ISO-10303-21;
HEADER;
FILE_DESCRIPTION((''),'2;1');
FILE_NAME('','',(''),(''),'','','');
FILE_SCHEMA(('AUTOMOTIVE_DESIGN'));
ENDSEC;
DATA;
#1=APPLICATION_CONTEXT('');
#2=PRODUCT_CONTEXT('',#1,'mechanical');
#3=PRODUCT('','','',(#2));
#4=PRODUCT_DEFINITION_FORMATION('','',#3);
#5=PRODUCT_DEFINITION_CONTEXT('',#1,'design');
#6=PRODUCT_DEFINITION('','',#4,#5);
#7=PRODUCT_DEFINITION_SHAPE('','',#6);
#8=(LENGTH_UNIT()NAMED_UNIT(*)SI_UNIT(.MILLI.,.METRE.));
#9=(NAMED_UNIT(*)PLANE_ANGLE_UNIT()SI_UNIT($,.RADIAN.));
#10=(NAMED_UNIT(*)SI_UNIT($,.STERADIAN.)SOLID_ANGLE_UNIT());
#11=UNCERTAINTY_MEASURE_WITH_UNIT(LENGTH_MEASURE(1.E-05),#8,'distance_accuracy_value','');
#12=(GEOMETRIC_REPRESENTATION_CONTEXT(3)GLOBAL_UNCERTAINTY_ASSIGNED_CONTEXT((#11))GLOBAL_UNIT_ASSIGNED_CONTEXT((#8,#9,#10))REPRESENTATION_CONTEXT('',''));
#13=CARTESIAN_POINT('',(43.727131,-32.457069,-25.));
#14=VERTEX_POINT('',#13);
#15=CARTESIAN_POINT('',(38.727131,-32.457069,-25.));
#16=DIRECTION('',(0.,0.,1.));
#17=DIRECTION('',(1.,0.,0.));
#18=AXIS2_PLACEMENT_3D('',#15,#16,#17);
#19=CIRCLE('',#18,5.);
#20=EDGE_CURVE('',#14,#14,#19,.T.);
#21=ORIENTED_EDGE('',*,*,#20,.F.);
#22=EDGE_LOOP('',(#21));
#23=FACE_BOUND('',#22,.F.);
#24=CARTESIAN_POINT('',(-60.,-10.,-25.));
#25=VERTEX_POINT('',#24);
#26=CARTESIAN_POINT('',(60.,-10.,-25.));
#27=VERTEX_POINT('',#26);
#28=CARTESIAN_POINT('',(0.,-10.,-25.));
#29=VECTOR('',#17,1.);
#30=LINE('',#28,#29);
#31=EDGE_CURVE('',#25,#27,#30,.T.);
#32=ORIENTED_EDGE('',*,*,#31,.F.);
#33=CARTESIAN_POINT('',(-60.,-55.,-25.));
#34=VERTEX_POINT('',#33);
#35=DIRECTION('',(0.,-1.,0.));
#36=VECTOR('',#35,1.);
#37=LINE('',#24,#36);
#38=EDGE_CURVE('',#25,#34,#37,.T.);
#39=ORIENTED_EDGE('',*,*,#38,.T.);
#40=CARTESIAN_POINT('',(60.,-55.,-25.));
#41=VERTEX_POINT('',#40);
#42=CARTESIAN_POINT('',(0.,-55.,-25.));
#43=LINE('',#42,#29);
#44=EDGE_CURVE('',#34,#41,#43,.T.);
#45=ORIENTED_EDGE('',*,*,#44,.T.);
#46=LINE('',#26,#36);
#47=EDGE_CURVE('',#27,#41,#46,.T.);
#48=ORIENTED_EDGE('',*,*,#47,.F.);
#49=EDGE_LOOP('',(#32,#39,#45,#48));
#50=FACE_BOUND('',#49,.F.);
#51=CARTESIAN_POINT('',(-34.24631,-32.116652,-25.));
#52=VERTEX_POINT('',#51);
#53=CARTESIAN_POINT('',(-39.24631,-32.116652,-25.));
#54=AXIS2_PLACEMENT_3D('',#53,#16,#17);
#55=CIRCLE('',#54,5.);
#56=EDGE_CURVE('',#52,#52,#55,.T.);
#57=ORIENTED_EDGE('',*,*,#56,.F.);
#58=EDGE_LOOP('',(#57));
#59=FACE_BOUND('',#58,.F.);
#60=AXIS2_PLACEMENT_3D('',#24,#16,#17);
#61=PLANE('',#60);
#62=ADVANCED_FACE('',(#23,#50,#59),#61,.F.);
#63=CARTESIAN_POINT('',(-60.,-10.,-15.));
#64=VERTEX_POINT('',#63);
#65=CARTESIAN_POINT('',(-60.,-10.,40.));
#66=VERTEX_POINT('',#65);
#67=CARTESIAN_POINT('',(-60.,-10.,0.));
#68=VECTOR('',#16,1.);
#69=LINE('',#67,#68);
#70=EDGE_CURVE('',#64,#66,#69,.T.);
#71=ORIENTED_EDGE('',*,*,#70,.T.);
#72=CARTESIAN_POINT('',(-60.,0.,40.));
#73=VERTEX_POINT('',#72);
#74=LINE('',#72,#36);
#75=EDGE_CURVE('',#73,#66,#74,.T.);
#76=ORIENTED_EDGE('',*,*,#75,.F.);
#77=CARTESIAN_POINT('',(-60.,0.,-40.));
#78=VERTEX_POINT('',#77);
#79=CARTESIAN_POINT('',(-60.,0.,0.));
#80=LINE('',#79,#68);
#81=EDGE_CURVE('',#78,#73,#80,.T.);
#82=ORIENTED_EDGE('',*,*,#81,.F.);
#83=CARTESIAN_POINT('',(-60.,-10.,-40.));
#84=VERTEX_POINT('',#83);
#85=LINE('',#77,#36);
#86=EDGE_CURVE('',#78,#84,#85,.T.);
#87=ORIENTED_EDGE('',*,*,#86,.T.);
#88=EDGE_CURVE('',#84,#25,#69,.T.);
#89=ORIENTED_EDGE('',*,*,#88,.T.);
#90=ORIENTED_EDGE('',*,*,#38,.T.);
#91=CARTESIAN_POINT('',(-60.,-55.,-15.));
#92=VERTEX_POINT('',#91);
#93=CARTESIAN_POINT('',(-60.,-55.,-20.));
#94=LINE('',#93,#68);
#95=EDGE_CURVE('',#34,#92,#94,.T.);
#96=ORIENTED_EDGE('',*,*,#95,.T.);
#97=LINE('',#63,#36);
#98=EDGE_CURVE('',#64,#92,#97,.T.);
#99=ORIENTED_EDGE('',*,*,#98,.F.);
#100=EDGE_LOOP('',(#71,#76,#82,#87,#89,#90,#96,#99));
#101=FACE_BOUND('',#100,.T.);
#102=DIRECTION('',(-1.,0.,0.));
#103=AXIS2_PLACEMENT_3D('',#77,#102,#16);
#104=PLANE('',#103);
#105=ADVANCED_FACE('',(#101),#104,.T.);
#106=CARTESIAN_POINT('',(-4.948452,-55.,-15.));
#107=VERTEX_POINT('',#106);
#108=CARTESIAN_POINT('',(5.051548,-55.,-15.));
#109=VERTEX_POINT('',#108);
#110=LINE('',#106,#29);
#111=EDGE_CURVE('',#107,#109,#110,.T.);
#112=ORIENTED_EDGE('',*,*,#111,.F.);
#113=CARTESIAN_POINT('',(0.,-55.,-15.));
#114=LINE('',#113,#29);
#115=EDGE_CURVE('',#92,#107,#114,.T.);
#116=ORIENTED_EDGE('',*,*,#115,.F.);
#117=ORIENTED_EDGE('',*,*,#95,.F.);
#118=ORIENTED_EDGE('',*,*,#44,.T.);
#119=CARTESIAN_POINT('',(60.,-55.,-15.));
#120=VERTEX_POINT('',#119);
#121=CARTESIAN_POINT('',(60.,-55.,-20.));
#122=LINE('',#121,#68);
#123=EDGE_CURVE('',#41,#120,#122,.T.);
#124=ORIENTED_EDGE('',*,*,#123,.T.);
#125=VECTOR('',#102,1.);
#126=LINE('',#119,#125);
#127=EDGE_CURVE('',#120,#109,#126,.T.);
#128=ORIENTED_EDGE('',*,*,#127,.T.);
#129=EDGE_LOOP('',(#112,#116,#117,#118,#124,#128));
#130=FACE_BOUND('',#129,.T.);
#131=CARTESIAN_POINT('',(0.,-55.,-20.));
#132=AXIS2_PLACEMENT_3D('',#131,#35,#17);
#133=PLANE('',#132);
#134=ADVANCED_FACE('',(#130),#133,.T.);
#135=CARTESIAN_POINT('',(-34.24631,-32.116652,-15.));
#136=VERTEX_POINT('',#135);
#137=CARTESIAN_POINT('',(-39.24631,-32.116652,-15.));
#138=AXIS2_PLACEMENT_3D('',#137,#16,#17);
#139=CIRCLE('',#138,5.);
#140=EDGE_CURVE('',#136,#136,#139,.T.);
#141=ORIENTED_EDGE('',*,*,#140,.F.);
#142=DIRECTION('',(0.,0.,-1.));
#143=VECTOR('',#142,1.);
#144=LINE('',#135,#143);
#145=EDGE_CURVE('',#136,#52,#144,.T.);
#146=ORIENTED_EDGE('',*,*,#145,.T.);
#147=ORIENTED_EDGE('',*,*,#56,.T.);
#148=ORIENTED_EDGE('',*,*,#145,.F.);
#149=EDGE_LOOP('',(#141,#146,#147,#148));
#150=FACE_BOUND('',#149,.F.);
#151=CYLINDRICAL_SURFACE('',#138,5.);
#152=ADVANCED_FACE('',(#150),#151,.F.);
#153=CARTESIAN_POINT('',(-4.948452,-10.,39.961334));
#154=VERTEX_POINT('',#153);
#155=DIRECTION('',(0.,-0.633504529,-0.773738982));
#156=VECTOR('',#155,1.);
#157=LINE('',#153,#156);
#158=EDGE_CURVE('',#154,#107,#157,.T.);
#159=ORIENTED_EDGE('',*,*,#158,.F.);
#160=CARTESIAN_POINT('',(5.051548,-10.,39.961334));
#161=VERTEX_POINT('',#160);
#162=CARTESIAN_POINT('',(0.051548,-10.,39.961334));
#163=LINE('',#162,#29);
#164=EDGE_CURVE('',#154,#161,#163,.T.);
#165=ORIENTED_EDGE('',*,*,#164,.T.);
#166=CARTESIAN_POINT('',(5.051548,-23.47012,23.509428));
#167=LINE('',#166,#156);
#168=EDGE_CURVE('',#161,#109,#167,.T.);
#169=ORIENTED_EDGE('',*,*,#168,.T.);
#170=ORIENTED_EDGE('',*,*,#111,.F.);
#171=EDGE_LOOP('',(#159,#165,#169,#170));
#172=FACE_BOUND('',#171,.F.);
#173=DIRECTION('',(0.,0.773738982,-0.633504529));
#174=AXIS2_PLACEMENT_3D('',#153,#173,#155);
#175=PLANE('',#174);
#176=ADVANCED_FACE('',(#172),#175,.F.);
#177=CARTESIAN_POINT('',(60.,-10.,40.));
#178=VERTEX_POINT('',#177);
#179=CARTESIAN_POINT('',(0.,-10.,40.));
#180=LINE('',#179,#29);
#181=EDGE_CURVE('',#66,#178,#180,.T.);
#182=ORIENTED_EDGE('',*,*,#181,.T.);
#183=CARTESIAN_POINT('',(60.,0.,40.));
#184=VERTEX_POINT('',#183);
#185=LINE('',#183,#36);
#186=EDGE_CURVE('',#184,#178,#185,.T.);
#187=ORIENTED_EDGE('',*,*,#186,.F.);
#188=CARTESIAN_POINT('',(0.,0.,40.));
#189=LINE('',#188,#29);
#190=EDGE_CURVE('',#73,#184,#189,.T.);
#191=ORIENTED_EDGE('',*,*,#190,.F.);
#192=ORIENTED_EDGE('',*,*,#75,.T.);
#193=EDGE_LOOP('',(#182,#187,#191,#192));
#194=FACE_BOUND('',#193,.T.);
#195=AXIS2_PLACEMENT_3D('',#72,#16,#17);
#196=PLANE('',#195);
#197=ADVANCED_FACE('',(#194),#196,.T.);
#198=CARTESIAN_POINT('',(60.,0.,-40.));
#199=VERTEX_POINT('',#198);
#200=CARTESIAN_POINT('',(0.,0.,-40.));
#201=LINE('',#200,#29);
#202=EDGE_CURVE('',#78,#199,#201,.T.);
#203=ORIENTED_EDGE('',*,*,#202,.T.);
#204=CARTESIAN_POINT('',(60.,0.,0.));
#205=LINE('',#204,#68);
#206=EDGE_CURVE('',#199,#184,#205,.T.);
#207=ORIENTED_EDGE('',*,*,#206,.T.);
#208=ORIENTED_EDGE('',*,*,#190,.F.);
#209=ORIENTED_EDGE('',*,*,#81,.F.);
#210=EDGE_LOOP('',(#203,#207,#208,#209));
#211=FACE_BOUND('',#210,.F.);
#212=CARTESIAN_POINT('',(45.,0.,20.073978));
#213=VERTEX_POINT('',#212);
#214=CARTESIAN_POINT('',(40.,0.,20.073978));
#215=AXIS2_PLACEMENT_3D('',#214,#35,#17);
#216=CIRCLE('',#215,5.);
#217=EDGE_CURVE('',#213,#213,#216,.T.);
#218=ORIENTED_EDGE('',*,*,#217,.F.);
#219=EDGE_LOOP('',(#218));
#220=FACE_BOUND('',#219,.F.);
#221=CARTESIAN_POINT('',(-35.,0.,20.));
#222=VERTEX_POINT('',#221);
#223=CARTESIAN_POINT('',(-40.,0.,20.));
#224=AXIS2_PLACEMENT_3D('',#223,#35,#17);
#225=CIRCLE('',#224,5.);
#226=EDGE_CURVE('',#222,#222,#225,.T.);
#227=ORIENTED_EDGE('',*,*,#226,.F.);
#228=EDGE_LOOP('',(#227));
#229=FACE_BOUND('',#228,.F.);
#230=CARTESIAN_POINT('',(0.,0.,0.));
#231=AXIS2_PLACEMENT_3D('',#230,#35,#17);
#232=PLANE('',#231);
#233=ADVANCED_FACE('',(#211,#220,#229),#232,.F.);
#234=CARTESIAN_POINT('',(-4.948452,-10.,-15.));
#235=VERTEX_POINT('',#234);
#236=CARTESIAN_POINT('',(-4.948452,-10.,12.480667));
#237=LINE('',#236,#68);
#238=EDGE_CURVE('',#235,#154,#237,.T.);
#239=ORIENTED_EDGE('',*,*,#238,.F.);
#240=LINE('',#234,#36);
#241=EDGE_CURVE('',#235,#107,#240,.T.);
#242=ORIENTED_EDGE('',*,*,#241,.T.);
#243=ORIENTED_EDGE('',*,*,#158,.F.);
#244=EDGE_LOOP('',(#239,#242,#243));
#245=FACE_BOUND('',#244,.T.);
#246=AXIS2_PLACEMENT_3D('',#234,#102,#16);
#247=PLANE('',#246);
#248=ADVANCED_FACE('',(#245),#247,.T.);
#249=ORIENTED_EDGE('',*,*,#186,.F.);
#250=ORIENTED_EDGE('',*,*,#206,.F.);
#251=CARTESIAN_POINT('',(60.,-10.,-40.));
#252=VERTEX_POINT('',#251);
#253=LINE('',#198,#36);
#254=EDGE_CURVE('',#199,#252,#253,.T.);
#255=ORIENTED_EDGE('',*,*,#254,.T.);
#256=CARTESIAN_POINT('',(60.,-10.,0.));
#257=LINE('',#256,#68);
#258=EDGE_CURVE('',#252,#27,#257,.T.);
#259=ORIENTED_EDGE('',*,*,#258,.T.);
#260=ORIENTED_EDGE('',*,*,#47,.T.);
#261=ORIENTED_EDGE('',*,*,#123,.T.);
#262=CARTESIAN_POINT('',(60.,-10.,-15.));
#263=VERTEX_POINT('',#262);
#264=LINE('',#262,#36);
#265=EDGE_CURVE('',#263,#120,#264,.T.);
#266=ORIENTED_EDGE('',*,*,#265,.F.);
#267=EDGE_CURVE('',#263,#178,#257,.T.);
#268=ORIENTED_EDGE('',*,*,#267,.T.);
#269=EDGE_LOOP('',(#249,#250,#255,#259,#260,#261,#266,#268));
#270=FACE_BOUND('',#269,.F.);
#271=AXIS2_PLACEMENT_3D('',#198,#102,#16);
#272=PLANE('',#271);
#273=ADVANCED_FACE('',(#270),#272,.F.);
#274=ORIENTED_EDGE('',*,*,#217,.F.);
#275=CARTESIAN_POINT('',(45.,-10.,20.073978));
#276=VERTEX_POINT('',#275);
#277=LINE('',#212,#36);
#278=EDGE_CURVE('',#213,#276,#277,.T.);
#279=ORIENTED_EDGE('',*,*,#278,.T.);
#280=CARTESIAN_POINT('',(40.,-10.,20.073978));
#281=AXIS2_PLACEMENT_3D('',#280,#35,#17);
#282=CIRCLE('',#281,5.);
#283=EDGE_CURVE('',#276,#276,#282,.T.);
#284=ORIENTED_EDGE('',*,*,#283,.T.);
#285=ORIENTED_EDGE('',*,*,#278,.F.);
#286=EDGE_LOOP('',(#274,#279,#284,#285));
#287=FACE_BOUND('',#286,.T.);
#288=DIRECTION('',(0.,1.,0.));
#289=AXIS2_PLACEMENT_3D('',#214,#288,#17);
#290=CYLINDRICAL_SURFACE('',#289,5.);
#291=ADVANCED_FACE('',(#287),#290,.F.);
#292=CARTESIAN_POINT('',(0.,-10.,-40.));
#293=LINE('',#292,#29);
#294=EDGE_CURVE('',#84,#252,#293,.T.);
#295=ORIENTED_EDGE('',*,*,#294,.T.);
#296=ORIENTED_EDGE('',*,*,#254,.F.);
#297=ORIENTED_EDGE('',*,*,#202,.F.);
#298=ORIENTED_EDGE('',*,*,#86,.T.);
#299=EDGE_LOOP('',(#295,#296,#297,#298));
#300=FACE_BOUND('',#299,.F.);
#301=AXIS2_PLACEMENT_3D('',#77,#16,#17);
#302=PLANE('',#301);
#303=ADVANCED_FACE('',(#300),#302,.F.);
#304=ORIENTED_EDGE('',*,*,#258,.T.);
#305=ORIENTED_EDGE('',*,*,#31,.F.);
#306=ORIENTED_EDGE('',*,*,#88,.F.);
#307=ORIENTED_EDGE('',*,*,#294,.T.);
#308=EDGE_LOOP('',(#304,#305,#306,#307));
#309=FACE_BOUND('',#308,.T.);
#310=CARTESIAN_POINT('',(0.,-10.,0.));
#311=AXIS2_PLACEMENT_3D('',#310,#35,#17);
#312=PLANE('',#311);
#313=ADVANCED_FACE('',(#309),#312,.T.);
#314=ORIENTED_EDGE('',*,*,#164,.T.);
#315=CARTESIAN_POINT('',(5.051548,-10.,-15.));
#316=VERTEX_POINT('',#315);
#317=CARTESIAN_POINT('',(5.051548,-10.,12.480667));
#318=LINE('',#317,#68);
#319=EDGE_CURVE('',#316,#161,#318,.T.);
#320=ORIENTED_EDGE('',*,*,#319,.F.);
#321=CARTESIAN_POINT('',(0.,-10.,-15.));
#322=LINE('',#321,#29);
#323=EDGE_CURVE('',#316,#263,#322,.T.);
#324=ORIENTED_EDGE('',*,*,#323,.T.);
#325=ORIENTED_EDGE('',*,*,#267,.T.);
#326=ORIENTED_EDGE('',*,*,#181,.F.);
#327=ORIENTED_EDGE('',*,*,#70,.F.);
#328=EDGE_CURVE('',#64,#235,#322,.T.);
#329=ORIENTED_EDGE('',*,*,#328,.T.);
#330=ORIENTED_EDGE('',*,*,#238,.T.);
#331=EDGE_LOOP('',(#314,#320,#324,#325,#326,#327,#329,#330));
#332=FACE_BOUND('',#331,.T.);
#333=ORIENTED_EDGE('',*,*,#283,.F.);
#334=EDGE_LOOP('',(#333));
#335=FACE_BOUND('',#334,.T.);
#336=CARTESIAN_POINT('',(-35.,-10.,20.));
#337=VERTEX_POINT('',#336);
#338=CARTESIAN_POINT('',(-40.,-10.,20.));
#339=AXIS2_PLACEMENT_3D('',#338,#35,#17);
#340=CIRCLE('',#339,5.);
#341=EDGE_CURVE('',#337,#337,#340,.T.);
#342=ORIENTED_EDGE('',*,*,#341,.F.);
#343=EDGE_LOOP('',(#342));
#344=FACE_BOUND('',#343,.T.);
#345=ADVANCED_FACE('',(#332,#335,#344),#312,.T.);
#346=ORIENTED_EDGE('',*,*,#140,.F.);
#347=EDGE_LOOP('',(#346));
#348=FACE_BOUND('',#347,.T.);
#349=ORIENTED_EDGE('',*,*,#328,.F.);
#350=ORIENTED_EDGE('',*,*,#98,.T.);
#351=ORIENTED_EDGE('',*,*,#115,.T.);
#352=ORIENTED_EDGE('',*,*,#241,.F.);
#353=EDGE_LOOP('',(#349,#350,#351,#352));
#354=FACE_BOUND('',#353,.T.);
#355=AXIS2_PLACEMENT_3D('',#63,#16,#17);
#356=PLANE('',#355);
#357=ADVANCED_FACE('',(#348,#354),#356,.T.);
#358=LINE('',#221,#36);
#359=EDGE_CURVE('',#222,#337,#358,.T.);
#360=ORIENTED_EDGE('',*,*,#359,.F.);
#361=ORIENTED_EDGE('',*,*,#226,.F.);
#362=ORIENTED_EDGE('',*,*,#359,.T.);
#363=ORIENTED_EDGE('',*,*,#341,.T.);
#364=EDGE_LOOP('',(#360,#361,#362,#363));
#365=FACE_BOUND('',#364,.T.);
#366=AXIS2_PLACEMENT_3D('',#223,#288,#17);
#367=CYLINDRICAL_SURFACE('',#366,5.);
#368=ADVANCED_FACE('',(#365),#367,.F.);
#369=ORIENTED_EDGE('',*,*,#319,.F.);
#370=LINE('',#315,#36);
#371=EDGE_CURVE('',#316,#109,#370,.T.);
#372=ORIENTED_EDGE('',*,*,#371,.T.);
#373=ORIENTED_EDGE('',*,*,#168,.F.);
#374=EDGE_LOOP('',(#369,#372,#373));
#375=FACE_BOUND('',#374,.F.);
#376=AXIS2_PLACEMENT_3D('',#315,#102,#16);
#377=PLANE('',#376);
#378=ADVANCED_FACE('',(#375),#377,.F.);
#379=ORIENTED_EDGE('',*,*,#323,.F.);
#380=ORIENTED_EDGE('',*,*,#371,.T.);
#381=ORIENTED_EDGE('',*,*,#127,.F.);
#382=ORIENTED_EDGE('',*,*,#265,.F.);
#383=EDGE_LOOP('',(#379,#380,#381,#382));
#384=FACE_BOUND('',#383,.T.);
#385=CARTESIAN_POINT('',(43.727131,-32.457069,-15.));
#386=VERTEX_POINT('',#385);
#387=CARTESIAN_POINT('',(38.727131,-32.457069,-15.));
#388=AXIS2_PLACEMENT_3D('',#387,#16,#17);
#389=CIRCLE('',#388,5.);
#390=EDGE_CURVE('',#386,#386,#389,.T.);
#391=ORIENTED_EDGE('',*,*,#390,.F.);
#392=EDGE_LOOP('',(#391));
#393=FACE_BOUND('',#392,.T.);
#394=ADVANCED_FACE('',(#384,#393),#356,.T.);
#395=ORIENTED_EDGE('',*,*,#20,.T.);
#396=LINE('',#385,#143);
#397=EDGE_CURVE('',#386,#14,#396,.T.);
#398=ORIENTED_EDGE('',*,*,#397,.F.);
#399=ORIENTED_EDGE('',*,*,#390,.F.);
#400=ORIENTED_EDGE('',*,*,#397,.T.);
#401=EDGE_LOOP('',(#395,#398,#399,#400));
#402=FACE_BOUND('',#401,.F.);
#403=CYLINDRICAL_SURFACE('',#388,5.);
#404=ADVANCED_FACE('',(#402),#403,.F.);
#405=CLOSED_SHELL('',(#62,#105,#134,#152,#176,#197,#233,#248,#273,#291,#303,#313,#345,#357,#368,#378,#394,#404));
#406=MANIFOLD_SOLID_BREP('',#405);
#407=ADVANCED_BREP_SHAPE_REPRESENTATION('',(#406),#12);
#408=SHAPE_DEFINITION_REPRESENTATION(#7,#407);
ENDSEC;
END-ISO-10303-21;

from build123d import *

# Parameters (mm, degrees)
F0_W     = 120
F0_H     = 80
F0_R     = 5
F1_DEPTH = 10
F2_W     = 120
F2_H     = 10
F3_DEPTH = 45
F4_R     = 5
F5_DEPTH = 25
F6_W     = 10
F6_H     = 54.9613343179
F7_DEPTH = 45
F9_DEPTH = 25


# Not quite as in the source:
# - a feature names something its author has since deleted; it is built from what else it names


with BuildPart() as f1:
    # F0 (on Front) → F1 (new body)
    with BuildSketch(Plane.XZ):
        Rectangle(F0_W, F0_H)
        with Locations((-40, 20)):
            Circle(F0_R, mode=Mode.SUBTRACT)
        with Locations((40, 20.0739782304)):
            Circle(F0_R, mode=Mode.SUBTRACT)
    extrude(amount=F1_DEPTH)

    # F2 (on face) → F3 (join)
    with BuildSketch(Plane.XZ.offset(10)):
        with Locations((0, -20)):
            Rectangle(F2_W, F2_H)
    extrude(amount=F3_DEPTH)

    # F4 (on face) → F5 (cut)
    with BuildSketch(Plane.XY.offset(-15)):
        with Locations((-39.2463095486, -32.116651535)):
            Circle(F4_R)
        with Locations((38.7271312058, -32.4570691816)):
            Circle(F4_R)
    extrude(amount=-F5_DEPTH, mode=Mode.SUBTRACT)

    # F6 (on face) → F7 (join)
    with BuildSketch(Plane.XZ.offset(10)):
        with Locations((0.0515476614, 12.480667159)):
            Rectangle(F6_W, F6_H)
    extrude(amount=F7_DEPTH)

    # F8 (on face) → F9 (cut)
    with BuildSketch(Plane(origin=(-4.9484523386, 0, 0), x_dir=(0, -1, 0), z_dir=(-1, 0, 0))):
        Polygon((55, 39.9613343179), (10, 39.9613343179), (55, -15), align=None)
    extrude(amount=-F9_DEPTH, mode=Mode.SUBTRACT)


solid = f1.part
